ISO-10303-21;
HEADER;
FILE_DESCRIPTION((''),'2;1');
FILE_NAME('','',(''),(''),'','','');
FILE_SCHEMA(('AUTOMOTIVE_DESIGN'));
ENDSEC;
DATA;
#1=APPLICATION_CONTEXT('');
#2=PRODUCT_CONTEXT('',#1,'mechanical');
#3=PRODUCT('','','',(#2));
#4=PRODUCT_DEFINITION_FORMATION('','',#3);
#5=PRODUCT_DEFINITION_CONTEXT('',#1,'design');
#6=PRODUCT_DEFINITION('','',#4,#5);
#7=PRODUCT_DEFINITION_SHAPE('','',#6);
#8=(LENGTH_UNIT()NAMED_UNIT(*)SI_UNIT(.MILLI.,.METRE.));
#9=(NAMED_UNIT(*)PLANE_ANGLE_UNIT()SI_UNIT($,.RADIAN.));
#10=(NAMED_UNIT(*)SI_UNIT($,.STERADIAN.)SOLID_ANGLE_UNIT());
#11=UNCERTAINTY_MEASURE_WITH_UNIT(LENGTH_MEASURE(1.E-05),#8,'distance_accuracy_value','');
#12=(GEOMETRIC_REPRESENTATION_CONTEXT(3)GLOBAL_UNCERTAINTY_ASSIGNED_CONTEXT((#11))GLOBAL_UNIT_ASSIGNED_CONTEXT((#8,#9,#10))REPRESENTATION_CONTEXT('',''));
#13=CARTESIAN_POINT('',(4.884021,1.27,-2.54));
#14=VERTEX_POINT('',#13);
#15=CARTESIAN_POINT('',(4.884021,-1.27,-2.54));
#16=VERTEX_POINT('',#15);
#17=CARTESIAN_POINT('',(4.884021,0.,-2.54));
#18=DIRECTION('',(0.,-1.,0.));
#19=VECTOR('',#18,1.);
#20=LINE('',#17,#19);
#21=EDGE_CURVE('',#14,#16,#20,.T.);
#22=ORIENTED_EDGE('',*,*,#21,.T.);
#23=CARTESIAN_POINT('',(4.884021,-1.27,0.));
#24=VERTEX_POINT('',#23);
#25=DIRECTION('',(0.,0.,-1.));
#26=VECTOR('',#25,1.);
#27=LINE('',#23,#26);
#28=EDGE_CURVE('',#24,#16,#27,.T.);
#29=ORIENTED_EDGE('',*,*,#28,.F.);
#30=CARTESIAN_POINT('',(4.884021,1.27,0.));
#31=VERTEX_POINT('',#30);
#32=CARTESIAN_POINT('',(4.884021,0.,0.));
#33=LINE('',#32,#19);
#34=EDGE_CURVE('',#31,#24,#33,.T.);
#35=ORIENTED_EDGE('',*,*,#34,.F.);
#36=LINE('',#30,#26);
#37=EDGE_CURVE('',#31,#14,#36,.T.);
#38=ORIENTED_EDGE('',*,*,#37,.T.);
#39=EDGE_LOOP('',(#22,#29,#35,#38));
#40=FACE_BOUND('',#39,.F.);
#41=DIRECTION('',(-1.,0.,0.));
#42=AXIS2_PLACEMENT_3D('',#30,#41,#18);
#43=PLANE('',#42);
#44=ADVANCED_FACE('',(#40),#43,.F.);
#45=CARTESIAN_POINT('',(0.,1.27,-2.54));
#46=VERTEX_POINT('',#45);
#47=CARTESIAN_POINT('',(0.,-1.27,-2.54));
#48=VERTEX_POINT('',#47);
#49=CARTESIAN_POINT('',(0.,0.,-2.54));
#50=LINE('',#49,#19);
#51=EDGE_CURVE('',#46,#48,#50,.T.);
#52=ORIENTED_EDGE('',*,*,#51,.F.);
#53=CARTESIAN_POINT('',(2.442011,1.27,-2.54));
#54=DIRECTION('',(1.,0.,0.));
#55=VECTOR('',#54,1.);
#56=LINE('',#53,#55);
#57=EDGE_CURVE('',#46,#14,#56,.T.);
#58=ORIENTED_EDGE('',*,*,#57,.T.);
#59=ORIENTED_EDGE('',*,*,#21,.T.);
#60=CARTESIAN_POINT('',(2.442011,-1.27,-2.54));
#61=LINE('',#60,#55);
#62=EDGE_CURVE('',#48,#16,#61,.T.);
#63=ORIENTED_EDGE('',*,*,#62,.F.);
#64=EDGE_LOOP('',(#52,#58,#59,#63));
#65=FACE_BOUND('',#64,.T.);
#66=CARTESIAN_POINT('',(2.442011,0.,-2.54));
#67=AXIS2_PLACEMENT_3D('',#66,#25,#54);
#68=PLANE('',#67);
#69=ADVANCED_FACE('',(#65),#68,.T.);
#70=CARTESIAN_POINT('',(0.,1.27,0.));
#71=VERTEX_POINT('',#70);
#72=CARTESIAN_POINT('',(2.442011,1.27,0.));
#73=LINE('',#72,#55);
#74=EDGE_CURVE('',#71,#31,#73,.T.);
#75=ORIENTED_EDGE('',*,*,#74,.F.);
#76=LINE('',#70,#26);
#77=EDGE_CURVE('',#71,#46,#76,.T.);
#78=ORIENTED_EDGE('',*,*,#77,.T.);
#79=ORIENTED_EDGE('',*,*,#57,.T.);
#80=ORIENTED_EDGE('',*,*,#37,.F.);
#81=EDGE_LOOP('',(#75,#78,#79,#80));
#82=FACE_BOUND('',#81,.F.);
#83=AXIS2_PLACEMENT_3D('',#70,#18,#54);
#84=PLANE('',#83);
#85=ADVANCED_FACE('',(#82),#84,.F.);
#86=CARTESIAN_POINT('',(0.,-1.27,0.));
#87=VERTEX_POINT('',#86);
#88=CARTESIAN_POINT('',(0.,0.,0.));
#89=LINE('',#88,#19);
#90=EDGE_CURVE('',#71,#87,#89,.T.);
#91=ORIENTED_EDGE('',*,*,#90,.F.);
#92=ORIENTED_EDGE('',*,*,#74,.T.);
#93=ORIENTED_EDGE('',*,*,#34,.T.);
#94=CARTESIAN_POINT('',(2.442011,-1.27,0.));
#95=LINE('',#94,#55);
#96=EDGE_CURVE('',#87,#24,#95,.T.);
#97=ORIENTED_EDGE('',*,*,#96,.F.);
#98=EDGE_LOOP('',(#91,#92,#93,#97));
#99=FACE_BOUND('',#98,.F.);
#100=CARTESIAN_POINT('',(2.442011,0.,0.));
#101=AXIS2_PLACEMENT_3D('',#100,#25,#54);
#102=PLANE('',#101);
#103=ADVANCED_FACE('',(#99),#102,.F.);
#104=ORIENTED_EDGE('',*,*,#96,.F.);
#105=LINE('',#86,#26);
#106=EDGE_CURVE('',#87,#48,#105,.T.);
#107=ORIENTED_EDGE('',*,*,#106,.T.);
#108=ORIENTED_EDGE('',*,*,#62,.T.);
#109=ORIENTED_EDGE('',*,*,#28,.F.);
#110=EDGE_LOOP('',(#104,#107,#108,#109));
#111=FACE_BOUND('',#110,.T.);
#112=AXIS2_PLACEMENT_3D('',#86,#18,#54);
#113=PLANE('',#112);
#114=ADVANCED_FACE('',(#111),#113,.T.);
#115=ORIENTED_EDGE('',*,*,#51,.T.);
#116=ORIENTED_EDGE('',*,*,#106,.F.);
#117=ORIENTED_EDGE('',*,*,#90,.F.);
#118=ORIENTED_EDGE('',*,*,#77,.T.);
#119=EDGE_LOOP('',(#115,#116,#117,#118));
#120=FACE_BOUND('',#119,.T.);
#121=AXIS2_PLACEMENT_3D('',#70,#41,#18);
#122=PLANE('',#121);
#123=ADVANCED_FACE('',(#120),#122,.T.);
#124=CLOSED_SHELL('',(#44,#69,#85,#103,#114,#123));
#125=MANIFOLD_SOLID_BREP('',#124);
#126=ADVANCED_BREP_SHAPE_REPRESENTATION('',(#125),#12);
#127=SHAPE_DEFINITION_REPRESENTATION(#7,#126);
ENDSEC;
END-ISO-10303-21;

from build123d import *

# Parameters (mm, degrees)
F1_E0_W  = 4.8840213567
F1_E0_H  = 2.54
F2_DEPTH = 2.54


with BuildPart() as f2:
    # F1_E0 (on explicit) → F2 (new body)
    with BuildSketch(Plane(origin=(0, 1.27, 0), x_dir=(1, 0, 0), z_dir=(0, 0, -1))):
        with Locations((2.4420106784, 1.27)):
            Rectangle(F1_E0_W, F1_E0_H)
    extrude(amount=F2_DEPTH)


solid = f2.part
